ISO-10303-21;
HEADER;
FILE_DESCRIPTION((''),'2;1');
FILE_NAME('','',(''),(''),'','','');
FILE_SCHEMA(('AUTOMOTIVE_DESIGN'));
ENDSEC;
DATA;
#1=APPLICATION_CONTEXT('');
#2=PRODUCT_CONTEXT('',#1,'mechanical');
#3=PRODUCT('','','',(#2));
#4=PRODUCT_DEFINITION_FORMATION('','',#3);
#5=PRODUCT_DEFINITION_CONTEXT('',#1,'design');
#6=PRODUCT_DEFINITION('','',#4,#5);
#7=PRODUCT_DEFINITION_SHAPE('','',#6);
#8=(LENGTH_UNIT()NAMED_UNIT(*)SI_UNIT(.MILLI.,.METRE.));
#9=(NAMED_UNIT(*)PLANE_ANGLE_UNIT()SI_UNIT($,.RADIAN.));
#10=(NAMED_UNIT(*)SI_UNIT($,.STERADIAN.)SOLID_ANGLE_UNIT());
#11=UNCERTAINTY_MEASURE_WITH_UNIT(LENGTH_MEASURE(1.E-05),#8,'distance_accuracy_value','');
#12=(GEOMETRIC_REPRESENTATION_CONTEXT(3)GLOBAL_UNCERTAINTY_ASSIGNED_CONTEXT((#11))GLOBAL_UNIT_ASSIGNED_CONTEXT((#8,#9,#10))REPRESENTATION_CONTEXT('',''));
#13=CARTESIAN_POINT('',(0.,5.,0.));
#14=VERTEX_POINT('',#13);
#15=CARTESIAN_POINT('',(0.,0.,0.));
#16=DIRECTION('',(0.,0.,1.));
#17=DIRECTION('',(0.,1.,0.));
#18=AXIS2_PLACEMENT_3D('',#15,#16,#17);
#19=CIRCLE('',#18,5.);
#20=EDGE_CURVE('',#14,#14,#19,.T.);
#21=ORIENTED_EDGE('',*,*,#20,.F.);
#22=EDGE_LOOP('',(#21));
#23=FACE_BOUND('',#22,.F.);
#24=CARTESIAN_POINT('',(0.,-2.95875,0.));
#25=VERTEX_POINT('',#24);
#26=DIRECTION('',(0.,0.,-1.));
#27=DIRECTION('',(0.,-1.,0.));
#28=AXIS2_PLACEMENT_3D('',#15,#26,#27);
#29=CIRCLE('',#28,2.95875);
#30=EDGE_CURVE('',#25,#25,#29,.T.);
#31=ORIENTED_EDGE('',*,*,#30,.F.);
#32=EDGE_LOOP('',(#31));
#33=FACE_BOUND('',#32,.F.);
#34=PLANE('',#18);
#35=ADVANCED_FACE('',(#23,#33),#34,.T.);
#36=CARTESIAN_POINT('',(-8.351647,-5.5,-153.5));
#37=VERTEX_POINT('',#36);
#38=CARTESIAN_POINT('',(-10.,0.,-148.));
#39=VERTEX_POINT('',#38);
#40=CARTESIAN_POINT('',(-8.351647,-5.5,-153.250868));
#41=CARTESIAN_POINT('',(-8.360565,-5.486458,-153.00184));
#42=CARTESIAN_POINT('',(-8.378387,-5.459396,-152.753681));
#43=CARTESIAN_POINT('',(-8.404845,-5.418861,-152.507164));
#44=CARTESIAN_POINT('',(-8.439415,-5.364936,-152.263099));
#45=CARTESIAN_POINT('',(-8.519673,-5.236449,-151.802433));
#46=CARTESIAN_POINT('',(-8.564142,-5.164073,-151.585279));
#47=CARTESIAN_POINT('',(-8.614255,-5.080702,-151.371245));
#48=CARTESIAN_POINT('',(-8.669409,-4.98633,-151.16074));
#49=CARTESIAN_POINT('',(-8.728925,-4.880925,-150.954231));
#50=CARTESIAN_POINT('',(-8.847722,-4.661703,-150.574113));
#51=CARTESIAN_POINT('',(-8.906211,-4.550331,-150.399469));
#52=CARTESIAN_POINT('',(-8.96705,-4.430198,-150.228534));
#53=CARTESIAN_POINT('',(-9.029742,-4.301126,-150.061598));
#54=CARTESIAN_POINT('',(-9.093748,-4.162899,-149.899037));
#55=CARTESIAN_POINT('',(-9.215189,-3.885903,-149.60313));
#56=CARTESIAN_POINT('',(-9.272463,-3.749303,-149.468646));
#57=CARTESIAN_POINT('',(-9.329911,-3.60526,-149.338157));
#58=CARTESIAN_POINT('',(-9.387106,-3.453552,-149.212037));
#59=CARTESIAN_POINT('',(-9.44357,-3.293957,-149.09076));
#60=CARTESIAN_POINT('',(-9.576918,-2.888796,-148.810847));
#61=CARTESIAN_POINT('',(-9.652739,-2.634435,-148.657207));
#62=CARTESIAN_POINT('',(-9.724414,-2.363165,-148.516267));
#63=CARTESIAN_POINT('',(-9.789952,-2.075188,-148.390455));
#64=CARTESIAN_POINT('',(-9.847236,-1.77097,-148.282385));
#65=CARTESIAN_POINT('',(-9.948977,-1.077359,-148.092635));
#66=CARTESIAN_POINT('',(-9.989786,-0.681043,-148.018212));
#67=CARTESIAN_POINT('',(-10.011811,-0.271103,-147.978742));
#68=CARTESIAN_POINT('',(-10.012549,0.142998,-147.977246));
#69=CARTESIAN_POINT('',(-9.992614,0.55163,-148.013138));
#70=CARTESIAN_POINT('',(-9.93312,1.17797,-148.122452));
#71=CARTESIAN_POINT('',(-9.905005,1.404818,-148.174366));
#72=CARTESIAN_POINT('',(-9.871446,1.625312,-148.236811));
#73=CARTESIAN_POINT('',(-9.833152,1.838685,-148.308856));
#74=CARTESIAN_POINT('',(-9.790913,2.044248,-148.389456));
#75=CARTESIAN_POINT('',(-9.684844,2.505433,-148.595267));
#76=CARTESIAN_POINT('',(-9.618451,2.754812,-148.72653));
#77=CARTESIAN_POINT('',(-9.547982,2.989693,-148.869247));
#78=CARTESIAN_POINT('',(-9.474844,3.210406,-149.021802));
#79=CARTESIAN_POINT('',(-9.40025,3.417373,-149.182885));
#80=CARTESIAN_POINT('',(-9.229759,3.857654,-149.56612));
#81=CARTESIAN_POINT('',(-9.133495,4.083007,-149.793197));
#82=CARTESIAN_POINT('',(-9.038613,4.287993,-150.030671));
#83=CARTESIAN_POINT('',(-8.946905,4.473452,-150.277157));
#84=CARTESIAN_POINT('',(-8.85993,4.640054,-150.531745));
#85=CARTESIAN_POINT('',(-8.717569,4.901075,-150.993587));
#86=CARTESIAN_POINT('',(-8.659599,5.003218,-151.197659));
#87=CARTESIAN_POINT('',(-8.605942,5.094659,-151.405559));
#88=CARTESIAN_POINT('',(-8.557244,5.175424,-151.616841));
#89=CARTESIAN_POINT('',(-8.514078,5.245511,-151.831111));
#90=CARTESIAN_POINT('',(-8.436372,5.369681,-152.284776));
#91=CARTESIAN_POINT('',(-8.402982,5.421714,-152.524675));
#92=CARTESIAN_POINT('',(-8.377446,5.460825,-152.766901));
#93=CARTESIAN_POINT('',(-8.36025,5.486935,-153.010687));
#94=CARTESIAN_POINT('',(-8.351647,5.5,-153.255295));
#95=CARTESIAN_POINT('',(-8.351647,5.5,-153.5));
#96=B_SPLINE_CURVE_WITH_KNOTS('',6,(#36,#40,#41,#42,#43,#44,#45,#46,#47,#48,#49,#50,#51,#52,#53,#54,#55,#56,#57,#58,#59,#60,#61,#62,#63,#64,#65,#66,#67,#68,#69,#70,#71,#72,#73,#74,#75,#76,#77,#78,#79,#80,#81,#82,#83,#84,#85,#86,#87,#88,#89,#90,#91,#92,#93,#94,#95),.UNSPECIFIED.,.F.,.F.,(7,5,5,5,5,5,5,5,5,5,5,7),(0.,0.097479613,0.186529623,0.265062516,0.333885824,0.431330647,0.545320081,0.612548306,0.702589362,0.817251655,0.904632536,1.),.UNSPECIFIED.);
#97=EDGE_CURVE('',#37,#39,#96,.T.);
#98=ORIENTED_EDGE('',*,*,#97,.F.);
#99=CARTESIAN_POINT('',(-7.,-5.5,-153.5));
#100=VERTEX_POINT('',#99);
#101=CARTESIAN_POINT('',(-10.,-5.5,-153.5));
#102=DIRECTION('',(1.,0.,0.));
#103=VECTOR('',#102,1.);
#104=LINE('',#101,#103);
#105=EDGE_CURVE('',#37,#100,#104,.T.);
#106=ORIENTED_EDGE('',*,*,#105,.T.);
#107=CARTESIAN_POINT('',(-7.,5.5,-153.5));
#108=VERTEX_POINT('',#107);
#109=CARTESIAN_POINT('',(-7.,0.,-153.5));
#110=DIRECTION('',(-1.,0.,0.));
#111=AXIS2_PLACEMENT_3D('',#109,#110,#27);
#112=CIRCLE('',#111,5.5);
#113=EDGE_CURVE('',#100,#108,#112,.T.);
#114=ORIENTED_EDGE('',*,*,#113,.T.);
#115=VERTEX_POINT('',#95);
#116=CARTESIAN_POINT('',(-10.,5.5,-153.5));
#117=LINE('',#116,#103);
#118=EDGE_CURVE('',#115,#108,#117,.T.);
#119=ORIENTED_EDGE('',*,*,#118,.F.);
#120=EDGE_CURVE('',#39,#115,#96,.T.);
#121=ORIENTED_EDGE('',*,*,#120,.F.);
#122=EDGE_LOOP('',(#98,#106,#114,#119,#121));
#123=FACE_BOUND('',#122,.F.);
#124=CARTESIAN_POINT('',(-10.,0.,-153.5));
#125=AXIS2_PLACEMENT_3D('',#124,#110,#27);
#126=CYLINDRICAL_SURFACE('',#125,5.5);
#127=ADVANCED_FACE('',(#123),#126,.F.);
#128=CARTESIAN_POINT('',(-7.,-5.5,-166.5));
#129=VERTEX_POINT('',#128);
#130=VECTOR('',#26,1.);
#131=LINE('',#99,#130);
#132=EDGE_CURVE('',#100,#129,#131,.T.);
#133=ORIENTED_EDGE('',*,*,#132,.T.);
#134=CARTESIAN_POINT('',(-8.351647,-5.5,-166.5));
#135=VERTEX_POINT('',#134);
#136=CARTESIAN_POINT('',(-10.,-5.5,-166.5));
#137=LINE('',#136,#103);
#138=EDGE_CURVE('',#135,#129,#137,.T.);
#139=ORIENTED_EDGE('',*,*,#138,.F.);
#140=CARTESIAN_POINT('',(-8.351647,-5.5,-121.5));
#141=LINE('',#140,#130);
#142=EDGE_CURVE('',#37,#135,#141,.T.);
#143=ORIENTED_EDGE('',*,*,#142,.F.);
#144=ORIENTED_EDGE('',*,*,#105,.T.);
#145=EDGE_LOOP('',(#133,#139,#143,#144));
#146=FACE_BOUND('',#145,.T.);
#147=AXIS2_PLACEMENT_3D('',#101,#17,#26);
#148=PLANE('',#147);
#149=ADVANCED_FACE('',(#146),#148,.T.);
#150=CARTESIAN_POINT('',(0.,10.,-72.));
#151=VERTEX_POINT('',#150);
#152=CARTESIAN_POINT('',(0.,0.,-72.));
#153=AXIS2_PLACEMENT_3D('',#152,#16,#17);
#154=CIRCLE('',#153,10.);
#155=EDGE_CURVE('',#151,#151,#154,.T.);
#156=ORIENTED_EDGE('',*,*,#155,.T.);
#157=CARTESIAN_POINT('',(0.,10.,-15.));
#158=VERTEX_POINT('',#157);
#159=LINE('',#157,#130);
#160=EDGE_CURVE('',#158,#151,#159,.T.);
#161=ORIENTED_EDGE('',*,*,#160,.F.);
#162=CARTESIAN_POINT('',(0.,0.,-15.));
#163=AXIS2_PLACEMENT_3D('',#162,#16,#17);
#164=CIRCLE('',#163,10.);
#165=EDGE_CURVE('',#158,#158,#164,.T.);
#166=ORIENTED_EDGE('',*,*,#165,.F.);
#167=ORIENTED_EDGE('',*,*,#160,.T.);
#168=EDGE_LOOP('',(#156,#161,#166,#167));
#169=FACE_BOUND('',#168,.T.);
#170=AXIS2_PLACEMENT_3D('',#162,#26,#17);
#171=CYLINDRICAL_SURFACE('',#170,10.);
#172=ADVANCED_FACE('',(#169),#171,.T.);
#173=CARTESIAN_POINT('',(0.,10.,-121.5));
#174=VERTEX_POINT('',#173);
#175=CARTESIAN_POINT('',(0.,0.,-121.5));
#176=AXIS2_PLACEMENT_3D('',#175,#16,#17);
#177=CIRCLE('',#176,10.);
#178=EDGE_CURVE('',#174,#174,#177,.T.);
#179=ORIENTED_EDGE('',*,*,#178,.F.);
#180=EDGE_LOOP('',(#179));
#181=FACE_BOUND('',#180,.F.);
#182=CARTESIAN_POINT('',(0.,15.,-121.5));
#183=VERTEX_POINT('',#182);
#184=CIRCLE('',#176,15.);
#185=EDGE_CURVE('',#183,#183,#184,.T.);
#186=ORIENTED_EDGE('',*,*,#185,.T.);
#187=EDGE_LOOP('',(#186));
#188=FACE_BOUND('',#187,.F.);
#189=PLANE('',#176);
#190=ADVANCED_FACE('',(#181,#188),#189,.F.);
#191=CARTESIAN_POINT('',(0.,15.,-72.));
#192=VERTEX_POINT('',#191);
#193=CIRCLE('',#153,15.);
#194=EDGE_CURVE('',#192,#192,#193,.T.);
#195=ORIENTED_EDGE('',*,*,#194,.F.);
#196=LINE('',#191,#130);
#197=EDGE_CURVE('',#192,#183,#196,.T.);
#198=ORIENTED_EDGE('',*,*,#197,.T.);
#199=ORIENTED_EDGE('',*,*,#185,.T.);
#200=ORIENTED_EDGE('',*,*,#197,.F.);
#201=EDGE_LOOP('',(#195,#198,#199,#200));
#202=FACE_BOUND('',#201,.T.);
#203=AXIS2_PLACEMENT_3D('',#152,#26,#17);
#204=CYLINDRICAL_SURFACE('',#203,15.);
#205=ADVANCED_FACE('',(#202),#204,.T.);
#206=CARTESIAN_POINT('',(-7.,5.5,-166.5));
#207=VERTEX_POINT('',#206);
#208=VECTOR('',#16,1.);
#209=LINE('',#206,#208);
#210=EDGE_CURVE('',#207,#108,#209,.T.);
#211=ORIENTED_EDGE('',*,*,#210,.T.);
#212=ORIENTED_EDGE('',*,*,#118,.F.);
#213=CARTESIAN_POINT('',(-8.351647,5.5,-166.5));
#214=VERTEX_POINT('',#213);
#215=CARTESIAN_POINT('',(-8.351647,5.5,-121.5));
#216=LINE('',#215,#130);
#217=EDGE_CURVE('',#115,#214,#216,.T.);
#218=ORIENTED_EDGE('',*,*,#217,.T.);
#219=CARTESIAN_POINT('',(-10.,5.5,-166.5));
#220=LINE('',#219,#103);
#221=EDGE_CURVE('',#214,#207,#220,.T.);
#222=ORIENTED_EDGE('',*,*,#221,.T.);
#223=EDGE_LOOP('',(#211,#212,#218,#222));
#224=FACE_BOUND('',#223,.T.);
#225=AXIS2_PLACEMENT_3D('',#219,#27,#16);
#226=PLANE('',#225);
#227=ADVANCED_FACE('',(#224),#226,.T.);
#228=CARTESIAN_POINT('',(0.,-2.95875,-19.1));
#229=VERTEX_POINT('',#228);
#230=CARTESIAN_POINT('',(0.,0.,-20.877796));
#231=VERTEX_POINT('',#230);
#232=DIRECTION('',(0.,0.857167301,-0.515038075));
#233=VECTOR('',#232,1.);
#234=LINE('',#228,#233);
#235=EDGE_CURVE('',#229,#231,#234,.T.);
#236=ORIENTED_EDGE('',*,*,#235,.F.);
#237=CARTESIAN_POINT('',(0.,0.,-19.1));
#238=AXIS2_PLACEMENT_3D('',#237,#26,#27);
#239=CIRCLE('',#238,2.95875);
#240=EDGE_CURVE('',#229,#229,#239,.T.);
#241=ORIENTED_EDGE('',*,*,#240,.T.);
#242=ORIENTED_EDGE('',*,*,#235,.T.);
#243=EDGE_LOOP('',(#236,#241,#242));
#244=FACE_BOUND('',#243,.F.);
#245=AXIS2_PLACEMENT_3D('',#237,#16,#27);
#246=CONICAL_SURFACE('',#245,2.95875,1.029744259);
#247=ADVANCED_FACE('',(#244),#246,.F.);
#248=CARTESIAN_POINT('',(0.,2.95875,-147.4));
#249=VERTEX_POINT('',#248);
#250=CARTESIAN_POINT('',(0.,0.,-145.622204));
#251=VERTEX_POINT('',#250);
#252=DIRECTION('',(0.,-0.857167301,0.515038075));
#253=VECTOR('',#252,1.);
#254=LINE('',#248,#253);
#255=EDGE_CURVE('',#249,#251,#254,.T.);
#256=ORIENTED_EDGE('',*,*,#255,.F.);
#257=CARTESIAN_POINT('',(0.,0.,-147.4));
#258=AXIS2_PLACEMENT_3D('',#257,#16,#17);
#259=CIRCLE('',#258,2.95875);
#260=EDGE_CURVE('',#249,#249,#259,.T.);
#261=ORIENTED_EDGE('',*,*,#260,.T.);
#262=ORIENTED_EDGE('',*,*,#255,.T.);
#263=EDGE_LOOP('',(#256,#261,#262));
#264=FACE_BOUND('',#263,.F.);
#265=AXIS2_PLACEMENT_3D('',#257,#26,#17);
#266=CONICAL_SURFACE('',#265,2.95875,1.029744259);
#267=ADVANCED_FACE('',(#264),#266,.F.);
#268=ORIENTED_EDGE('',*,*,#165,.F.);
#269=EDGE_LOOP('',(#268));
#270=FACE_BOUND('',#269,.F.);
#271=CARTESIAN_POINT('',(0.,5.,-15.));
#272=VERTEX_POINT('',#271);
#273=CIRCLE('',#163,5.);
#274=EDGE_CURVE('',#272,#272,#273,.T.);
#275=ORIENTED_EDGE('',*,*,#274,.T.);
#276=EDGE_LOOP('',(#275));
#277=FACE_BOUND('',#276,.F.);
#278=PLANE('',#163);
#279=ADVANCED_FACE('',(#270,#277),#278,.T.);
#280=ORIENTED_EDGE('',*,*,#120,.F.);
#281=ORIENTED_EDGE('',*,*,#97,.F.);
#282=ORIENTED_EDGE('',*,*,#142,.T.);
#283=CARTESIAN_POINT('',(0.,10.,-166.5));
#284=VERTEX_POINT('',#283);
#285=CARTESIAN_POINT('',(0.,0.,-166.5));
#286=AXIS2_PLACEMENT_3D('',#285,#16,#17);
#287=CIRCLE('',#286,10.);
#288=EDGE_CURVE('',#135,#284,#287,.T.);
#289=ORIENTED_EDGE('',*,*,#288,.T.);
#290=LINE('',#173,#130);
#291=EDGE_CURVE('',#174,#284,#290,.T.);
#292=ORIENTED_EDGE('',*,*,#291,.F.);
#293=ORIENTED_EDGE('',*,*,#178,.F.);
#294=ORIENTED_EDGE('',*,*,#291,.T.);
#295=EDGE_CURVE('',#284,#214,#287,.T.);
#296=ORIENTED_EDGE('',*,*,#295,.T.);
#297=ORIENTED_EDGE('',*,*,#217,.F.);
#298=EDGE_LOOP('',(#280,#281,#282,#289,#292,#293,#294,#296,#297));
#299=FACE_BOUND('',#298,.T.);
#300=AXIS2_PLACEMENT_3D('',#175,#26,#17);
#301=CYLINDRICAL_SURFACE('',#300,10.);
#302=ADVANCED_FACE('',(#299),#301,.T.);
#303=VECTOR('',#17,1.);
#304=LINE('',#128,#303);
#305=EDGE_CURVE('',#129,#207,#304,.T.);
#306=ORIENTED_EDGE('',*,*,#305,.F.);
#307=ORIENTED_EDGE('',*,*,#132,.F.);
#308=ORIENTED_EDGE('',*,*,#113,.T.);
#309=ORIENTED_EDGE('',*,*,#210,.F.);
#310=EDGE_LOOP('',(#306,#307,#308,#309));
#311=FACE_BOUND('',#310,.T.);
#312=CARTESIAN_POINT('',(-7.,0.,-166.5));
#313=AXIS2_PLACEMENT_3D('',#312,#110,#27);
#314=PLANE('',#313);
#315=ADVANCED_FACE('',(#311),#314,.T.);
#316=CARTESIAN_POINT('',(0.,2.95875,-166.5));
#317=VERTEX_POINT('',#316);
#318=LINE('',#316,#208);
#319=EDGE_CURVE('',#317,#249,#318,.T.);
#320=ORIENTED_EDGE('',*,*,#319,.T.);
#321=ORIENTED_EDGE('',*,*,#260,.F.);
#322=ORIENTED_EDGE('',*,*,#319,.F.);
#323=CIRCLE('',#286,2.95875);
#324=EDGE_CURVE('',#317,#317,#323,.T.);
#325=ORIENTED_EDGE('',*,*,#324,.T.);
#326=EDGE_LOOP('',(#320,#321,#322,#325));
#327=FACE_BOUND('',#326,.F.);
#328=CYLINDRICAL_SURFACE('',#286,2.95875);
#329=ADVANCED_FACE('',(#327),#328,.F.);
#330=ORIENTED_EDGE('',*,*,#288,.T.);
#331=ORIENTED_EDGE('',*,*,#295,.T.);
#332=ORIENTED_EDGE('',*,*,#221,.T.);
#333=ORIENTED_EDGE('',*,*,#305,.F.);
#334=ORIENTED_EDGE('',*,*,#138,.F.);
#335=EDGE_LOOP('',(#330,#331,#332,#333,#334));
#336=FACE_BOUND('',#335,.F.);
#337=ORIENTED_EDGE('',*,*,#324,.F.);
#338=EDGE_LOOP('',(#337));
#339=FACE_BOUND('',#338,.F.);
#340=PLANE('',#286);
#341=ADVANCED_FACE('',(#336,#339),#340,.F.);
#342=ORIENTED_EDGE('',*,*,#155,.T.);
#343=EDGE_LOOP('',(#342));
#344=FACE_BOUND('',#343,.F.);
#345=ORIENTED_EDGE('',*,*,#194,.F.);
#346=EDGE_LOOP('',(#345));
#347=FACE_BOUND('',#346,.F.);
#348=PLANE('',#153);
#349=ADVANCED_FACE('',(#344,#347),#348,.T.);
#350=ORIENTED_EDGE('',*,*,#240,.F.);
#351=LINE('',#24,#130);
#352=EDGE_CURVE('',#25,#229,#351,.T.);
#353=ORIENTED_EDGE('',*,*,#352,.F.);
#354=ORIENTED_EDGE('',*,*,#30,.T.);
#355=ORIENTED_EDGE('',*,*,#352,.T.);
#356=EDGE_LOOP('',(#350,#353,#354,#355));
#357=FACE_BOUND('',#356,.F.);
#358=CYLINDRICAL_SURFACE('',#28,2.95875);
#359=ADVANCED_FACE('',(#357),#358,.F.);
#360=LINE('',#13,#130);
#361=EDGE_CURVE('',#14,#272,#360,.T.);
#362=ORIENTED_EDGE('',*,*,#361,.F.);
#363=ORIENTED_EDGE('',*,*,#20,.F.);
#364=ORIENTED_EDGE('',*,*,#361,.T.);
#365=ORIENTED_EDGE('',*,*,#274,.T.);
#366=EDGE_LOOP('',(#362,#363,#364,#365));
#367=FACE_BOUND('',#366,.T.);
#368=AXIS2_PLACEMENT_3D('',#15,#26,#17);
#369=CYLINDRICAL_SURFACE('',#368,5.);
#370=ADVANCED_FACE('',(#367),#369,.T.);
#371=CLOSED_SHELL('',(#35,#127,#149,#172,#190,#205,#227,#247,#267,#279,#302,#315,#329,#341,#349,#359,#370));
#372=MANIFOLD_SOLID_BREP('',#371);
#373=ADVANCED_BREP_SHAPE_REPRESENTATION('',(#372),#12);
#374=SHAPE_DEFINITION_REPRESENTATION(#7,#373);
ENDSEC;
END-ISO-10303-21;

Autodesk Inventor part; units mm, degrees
ref_plane "YZ Plane" through (0, 0, 0) normal (1, 0, 0) x (0, 1, 0)
ref_plane "XZ Plane" through (0, 0, 0) normal (0, 1, 0) x (-1, 0, 0)
sketch "Sketch1" plane through (0, 0, 0) normal (1, 0, 0) x (0, 1, 0)
  line L0 (0, 0) -> (5, 0)
  line L1 (5, 0) -> (5, -15)
  line L2 (5, -15) -> (10, -15)
  line L3 (10, -15) -> (10, -72)
  line L4 (10, -72) -> (15, -72)
  line L5 (15, -72) -> (15, -121.5)
  line L6 (15, -121.5) -> (10, -121.5)
  line L7 (10, -121.5) -> (10, -166.5)
  line L8 (10, -166.5) -> (0, -166.5)
  line L9 (0, -166.5) -> (0, -166.5)
  line L10 (0, -166.5) -> (0, -166.5)
  line L11 (0, -166.5) -> (0, 0)
  point P0 (0, -83.25)
  point P1 (15, -96.75)
  point P2 (5, -166.5)
  point P3 (2.5, 0)
  point P4 (12.5, -72)
  dimension "d0" = 15
  dimension "d1" = 5
  dimension "d3" = 10
  dimension "d4" = 49.5
  dimension "d5" = 15
  dimension "d6" = 45
  dimension "d7" = 0
  dimension "d8" = 0
  dimension "d9" = 72
revolve "Revolution1" add sketch "Sketch1" angle 360 about axis through (0, 0, -166.5) along (0, 0, 1)
sketch "Sketch2" plane through (0, 0, 0) normal (0, 0, 1) x (1, 0, 0)
  circle A0 centre (0, 0) radius 5 projected
hole "Hole1" at (0, 0, 0) direction (0, 0, -1) diameter 5.9175 depth 19.1 tip angle 118 thread size "M7x1" class "6H" standard "ANSI Metric M Profile"
sketch "Sketch3" plane through (0, 0, -166.5) normal (0, 0, -1) x (-1, 0, 0)
  circle A0 centre (0, 0) radius 10 projected
  line L0 (0, 0) -> (10, 0)
  circle A1 centre (0, 0) radius 10 projected
ref_plane "Work Plane1" through (-10, 0, -166.5) normal (-1, 0, 0) x (0, -1, 0)
sketch "Sketch4" plane through (-10, 0, -166.5) normal (-1, 0, 0) x (0, -1, 0)
  line L0 (10, 45) -> (-10, 45) projected
  line L1 (10, 0) -> (-10, 0) projected
  line L2 (10, 0) -> (-10, 0) projected
  line L3 (0, 0) -> (-5.5, 0)
  line L4 (-5.5, 0) -> (-5.5, 13)
  line L5 (-5.5, 13) -> (5.5, 13) construction
  line L6 (5.5, 13) -> (5.5, 0)
  line L7 (0, 0) -> (5.5, 0)
  arc A0 (5.5, 13) -> (-5.5, 13) centre (0, 13) ccw
  point P0 (0, 166.5)
  point P1 (-5.5, 0)
  dimension "d18" = 5.5
  dimension "d19" = 13
  dimension "d20" = 11
extrude "Extrusion1" cut sketch "Sketch4" against normal blind 3
sketch "Sketch5" plane through (-7, -5.5, -166.5) normal (0, 0, -1) x (-1, 0, 0)
  point P0 (-7, 5.5)
  point P1 (-7, 5.5)
hole "Hole2" at (0, 0, -166.5) direction (0, 0, 1) diameter 5.9175 depth 19.1 tip angle 118 thread size "M7x1" class "6H" standard "ANSI Metric M Profile"
properties part number "SP002" material "Steel, Mild"
